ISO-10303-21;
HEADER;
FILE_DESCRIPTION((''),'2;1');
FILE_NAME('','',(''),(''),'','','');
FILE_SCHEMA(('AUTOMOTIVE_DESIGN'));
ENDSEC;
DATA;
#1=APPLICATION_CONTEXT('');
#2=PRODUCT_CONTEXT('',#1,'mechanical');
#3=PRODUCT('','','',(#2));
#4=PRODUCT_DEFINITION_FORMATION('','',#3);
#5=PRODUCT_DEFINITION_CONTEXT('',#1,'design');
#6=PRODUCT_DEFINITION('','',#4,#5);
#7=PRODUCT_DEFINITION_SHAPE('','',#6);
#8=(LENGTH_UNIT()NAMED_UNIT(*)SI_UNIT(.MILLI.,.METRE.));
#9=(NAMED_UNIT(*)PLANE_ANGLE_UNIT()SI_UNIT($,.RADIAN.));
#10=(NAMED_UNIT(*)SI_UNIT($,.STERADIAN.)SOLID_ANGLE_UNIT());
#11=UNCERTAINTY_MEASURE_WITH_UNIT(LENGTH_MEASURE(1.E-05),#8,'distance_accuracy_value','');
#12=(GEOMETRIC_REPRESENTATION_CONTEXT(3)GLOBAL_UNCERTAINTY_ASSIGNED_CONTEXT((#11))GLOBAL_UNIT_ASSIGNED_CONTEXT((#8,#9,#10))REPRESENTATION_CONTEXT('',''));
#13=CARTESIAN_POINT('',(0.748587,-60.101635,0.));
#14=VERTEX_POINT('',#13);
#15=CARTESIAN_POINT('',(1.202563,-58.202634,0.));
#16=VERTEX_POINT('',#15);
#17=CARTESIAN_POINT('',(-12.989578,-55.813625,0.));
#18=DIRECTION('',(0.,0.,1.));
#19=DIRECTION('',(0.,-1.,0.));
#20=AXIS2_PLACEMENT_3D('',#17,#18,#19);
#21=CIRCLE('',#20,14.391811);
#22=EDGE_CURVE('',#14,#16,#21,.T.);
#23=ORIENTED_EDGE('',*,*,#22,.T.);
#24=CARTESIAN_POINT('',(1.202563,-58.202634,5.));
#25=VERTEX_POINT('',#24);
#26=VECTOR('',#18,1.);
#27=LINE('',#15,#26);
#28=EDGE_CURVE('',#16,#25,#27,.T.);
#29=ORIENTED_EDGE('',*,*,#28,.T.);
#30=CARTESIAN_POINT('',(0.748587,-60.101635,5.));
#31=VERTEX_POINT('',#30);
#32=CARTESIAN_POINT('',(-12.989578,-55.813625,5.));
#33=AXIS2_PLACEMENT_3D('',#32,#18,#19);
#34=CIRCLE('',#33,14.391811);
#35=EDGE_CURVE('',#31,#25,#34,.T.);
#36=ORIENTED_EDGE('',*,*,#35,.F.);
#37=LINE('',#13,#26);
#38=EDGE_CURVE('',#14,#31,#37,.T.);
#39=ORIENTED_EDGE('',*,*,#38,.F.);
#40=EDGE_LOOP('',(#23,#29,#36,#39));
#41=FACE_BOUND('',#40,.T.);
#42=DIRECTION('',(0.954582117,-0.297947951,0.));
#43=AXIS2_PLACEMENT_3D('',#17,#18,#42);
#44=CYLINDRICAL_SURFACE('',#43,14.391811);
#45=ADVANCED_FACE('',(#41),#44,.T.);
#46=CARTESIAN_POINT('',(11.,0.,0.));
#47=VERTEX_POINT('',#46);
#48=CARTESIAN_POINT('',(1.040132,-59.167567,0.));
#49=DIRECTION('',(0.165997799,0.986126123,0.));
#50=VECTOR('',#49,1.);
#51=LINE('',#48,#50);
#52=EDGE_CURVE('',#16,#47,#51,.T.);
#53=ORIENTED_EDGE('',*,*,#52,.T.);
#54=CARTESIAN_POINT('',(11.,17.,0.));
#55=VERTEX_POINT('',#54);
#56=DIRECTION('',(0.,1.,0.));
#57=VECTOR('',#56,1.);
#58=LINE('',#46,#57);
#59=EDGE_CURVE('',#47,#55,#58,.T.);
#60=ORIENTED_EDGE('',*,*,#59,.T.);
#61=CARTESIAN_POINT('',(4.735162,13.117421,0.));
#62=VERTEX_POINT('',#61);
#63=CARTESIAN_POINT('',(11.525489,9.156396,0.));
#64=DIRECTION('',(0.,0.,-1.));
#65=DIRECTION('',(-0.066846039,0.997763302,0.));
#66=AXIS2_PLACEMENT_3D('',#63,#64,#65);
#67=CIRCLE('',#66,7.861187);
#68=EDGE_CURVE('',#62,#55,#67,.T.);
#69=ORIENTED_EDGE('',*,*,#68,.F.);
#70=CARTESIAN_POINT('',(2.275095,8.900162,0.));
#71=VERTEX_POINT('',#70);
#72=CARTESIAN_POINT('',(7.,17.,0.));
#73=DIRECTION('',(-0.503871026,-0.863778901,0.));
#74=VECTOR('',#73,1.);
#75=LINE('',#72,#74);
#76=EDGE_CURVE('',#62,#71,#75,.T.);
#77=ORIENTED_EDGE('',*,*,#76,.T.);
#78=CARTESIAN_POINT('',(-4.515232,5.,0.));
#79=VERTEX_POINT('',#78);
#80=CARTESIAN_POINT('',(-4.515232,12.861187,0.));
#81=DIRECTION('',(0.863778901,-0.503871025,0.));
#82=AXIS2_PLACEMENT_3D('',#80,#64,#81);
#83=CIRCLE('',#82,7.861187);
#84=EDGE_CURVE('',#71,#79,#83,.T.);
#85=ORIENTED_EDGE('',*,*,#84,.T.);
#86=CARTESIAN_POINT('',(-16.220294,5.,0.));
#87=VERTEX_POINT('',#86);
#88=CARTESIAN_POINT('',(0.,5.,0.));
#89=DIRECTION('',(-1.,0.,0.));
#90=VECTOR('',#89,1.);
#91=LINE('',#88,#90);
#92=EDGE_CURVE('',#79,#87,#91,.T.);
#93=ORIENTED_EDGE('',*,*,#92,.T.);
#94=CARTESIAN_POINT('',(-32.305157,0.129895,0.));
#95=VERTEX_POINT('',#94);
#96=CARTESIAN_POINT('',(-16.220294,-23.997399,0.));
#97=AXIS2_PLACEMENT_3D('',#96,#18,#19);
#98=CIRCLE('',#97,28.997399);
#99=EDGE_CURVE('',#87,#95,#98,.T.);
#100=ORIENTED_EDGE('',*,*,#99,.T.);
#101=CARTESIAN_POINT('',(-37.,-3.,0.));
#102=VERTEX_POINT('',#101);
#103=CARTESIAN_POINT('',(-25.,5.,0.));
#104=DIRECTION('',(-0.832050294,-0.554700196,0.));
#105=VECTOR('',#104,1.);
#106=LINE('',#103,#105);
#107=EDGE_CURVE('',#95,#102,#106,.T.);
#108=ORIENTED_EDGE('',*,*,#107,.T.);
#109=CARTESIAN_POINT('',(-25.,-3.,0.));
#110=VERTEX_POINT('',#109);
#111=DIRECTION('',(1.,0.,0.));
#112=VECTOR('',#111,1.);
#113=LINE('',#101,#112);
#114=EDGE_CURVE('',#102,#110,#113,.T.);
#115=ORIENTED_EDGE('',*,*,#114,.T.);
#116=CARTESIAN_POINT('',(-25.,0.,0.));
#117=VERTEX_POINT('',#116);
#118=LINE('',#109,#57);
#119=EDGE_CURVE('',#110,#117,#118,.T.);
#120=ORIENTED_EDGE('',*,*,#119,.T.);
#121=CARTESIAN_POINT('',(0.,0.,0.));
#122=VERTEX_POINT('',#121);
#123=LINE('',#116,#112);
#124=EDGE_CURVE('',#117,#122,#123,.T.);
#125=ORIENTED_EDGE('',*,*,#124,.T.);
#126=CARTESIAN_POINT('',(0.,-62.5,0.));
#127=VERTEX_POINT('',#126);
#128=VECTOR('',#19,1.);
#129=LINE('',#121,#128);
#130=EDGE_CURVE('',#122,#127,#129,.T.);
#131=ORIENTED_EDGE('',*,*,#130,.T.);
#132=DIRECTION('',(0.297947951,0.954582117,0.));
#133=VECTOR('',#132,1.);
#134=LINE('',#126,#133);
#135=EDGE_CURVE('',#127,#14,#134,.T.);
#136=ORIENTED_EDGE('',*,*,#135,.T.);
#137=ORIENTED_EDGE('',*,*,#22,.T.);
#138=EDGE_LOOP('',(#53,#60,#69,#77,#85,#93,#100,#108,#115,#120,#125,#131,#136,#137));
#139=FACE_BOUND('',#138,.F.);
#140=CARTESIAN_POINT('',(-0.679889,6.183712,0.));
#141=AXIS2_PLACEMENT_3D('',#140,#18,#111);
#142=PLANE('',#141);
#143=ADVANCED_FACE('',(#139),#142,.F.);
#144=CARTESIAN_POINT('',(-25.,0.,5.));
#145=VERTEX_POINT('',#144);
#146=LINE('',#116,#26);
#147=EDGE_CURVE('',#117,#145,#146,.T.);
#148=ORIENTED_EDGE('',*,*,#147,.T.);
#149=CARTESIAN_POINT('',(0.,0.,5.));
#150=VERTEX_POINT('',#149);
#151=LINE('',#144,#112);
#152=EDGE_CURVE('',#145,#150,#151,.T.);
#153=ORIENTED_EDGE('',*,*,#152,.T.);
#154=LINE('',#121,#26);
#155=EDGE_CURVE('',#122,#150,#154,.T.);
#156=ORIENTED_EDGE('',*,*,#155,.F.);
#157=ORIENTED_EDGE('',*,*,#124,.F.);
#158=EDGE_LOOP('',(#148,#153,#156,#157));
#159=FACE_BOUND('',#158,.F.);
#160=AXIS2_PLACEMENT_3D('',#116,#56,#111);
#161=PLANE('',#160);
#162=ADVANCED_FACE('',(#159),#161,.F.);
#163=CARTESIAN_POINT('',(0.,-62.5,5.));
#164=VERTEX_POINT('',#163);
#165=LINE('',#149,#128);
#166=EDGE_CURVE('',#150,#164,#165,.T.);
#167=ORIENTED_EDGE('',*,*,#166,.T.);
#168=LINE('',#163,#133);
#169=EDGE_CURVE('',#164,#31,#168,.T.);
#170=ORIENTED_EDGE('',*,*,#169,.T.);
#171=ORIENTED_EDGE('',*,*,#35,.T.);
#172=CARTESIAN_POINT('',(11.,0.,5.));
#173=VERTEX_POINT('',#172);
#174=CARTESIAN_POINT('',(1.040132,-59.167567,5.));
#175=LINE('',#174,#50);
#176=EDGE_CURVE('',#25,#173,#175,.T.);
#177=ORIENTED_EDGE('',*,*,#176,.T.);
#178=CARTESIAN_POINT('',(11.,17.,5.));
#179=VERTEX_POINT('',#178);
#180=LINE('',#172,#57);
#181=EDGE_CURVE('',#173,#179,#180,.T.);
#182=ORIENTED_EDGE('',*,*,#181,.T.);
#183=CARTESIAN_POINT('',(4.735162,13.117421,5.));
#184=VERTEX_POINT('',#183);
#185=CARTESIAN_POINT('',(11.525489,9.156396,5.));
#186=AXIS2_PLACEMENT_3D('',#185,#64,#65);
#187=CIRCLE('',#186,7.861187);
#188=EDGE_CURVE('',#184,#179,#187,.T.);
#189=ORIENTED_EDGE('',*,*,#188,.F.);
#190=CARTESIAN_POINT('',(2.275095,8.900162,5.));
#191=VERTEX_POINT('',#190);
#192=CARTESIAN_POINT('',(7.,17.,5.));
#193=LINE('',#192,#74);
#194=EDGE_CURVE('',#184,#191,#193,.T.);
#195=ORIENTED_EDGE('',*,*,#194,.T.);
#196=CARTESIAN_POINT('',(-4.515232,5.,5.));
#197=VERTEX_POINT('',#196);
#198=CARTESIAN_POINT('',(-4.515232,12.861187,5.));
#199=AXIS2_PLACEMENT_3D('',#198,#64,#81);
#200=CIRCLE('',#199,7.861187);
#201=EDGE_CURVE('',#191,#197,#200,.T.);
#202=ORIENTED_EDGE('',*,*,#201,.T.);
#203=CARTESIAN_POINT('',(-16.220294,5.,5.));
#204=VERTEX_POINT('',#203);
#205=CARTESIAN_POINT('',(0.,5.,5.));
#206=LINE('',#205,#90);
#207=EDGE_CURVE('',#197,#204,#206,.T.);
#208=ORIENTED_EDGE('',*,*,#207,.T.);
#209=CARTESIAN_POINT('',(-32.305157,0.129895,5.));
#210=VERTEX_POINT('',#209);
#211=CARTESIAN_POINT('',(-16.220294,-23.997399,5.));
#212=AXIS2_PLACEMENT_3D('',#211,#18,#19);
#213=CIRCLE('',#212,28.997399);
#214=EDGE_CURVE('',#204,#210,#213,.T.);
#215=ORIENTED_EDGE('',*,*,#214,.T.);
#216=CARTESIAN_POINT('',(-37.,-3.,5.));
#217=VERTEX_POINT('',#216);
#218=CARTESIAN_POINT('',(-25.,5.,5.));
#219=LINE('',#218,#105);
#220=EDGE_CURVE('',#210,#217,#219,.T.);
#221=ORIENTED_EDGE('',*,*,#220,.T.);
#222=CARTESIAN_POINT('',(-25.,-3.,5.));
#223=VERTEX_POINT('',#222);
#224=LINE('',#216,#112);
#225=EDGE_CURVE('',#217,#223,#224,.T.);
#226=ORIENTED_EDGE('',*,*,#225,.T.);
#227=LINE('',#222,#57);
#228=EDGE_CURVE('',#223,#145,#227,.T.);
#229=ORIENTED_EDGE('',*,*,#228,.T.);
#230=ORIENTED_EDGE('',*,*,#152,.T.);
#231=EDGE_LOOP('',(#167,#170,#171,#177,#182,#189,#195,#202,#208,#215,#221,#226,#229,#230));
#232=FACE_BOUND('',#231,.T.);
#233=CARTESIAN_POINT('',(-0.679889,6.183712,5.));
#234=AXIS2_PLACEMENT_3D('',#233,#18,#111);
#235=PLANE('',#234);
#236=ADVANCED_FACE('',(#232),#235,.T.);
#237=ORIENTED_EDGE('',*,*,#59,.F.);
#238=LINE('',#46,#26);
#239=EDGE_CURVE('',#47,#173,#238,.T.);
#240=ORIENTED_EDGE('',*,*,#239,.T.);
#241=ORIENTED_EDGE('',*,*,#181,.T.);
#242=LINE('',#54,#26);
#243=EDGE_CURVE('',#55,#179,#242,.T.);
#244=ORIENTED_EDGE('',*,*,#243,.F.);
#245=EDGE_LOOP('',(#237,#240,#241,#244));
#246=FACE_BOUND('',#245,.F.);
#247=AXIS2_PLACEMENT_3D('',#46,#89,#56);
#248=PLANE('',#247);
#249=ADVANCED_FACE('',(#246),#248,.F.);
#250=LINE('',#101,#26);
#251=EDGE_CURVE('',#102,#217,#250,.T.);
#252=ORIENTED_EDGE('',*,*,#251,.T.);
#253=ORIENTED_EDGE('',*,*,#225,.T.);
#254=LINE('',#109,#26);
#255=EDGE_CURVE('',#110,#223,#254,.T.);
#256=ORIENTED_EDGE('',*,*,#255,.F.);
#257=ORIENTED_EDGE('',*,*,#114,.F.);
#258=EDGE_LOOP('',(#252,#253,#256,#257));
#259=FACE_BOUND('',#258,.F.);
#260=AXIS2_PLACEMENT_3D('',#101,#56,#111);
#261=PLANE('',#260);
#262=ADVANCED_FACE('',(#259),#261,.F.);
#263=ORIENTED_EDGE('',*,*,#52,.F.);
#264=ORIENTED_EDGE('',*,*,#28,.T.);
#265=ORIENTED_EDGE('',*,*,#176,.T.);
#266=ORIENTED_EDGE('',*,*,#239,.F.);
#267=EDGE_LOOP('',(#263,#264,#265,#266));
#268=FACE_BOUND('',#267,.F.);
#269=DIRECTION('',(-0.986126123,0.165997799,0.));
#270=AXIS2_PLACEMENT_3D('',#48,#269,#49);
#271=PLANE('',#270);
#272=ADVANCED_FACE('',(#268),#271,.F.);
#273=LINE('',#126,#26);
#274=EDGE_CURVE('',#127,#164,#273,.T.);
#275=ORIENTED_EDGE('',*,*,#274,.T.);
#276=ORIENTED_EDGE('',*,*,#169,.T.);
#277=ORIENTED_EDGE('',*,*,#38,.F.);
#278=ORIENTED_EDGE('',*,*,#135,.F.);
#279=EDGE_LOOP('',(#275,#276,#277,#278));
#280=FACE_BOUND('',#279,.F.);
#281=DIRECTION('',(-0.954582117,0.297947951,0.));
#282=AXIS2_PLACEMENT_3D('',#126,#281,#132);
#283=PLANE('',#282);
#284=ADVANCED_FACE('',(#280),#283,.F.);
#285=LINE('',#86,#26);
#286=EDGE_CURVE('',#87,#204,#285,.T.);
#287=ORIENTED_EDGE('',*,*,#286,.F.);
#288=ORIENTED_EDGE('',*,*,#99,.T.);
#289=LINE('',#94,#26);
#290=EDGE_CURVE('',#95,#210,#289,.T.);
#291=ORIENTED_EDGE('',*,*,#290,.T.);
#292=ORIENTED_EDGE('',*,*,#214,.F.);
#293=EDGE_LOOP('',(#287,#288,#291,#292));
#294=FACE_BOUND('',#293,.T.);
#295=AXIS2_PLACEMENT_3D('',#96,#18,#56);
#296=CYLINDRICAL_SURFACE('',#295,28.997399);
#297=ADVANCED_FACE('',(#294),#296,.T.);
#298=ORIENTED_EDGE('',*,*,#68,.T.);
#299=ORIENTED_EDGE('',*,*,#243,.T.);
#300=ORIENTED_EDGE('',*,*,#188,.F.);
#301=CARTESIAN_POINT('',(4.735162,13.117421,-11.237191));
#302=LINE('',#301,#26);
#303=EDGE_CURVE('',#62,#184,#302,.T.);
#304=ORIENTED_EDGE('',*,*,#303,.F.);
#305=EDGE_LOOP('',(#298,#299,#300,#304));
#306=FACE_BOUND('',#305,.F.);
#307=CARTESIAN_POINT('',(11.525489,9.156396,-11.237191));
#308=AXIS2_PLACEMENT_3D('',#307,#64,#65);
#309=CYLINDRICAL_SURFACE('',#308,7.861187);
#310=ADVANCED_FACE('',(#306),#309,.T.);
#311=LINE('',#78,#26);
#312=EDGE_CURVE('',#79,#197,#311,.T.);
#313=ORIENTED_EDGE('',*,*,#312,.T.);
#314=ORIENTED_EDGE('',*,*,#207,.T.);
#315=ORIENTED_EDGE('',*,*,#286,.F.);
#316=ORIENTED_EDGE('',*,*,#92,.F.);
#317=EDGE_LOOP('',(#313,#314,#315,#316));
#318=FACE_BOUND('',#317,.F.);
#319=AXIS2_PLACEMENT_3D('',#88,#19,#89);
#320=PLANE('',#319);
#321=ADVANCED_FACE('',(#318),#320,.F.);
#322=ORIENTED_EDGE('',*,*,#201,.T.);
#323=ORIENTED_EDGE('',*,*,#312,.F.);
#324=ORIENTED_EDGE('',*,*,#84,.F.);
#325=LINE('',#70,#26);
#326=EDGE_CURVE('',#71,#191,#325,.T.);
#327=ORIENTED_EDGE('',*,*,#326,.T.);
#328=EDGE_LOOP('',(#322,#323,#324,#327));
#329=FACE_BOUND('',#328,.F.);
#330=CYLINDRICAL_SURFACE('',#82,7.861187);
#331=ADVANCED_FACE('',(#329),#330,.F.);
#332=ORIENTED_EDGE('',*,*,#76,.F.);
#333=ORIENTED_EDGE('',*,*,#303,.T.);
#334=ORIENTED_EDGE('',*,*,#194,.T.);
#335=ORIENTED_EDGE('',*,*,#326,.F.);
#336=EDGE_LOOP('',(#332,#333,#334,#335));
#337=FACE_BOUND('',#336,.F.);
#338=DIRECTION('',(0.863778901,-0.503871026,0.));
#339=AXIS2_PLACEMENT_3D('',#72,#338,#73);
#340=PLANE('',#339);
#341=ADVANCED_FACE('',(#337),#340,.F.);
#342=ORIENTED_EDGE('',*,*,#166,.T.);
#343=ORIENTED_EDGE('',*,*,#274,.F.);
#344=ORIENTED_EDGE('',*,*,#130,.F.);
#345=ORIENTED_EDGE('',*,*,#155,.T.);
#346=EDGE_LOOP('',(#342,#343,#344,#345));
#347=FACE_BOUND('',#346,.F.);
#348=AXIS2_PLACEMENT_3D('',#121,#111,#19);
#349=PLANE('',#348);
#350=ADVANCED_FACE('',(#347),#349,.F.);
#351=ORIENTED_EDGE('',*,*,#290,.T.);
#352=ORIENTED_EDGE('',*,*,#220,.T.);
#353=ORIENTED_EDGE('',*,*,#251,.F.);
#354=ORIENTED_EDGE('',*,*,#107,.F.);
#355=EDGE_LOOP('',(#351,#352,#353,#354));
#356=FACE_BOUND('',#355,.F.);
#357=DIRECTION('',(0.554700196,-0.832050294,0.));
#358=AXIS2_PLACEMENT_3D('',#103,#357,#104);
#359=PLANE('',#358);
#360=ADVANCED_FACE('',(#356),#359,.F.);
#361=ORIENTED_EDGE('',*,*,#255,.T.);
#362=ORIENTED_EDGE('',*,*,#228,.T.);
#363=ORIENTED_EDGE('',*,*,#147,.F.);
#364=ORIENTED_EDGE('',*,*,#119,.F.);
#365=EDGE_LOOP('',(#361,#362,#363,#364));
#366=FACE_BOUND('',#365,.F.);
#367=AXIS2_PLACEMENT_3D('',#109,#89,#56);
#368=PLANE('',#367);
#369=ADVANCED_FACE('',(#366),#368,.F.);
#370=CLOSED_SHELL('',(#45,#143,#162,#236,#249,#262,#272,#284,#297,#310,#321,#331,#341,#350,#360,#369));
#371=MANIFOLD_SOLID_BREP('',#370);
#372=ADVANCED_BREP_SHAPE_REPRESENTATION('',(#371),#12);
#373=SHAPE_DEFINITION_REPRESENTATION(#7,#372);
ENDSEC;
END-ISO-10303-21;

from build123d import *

# Parameters (mm, degrees)
F1_DEPTH    = 5
F2_T1_DEPTH = 5
F2_T3_DEPTH = 27.4743818089
F3_R        = 28.9973991458
F4_R        = 14.3918110757


# Not quite as in the source:
# - a fillet or chamfer that OpenCascade refuses, or shapes differently, is made with other operations: its cross-section is extruded or revolved along the edge and cut away or added


with BuildPart() as f1:
    # F0 (on Top) → F1 (new body)
    with BuildSketch(Plane.XY):
        Polygon((-25, 0), (0, 0), (0, -62.5), (1.0401320628, -59.1675673885), (11, 0), (11, 17), (7, 17), (0, 5), (-25, 5), (-37, -3), (-25, -3), align=None)
    extrude(amount=F1_DEPTH)

    # F2: fillet of radius 7.861186634 on 2 edges, made by hand

    # F2_s2 → F2_t1 (join)
    with BuildSketch(Plane.XY):
        with BuildLine():
            ThreePointArc((2.27509477, 8.9001624629), (-0.5998840547, 6.0444203344), (-4.5152323805, 5))
            Line((-4.5152323805, 5), (0, 5))
            Line((0, 5), (2.27509477, 8.9001624629))
        make_face()
    extrude(amount=F2_T1_DEPTH)

    # F2_s4 → F2_t3 (cut)
    with BuildSketch(Plane.XY.offset(-11.2371909045)):
        with BuildLine():
            ThreePointArc((11, 17), (7.3843664174, 15.838413937), (4.735162038, 13.1174206365))
            Line((4.735162038, 13.1174206365), (7, 17))
            Line((7, 17), (11, 17))
        make_face()
    extrude(amount=F2_T3_DEPTH, mode=Mode.SUBTRACT)

    # F3
    f3_edges = [f1.edges().sort_by_distance(p)[0] for p in [
        (-25, 5, 2.5),
    ]]
    fillet(f3_edges, radius=F3_R)

    # F4
    f4_edges = [f1.edges().sort_by_distance(p)[0] for p in [
        (1.040132, -59.167567, 2.5),
    ]]
    fillet(f4_edges, radius=F4_R)


solid = f1.part
